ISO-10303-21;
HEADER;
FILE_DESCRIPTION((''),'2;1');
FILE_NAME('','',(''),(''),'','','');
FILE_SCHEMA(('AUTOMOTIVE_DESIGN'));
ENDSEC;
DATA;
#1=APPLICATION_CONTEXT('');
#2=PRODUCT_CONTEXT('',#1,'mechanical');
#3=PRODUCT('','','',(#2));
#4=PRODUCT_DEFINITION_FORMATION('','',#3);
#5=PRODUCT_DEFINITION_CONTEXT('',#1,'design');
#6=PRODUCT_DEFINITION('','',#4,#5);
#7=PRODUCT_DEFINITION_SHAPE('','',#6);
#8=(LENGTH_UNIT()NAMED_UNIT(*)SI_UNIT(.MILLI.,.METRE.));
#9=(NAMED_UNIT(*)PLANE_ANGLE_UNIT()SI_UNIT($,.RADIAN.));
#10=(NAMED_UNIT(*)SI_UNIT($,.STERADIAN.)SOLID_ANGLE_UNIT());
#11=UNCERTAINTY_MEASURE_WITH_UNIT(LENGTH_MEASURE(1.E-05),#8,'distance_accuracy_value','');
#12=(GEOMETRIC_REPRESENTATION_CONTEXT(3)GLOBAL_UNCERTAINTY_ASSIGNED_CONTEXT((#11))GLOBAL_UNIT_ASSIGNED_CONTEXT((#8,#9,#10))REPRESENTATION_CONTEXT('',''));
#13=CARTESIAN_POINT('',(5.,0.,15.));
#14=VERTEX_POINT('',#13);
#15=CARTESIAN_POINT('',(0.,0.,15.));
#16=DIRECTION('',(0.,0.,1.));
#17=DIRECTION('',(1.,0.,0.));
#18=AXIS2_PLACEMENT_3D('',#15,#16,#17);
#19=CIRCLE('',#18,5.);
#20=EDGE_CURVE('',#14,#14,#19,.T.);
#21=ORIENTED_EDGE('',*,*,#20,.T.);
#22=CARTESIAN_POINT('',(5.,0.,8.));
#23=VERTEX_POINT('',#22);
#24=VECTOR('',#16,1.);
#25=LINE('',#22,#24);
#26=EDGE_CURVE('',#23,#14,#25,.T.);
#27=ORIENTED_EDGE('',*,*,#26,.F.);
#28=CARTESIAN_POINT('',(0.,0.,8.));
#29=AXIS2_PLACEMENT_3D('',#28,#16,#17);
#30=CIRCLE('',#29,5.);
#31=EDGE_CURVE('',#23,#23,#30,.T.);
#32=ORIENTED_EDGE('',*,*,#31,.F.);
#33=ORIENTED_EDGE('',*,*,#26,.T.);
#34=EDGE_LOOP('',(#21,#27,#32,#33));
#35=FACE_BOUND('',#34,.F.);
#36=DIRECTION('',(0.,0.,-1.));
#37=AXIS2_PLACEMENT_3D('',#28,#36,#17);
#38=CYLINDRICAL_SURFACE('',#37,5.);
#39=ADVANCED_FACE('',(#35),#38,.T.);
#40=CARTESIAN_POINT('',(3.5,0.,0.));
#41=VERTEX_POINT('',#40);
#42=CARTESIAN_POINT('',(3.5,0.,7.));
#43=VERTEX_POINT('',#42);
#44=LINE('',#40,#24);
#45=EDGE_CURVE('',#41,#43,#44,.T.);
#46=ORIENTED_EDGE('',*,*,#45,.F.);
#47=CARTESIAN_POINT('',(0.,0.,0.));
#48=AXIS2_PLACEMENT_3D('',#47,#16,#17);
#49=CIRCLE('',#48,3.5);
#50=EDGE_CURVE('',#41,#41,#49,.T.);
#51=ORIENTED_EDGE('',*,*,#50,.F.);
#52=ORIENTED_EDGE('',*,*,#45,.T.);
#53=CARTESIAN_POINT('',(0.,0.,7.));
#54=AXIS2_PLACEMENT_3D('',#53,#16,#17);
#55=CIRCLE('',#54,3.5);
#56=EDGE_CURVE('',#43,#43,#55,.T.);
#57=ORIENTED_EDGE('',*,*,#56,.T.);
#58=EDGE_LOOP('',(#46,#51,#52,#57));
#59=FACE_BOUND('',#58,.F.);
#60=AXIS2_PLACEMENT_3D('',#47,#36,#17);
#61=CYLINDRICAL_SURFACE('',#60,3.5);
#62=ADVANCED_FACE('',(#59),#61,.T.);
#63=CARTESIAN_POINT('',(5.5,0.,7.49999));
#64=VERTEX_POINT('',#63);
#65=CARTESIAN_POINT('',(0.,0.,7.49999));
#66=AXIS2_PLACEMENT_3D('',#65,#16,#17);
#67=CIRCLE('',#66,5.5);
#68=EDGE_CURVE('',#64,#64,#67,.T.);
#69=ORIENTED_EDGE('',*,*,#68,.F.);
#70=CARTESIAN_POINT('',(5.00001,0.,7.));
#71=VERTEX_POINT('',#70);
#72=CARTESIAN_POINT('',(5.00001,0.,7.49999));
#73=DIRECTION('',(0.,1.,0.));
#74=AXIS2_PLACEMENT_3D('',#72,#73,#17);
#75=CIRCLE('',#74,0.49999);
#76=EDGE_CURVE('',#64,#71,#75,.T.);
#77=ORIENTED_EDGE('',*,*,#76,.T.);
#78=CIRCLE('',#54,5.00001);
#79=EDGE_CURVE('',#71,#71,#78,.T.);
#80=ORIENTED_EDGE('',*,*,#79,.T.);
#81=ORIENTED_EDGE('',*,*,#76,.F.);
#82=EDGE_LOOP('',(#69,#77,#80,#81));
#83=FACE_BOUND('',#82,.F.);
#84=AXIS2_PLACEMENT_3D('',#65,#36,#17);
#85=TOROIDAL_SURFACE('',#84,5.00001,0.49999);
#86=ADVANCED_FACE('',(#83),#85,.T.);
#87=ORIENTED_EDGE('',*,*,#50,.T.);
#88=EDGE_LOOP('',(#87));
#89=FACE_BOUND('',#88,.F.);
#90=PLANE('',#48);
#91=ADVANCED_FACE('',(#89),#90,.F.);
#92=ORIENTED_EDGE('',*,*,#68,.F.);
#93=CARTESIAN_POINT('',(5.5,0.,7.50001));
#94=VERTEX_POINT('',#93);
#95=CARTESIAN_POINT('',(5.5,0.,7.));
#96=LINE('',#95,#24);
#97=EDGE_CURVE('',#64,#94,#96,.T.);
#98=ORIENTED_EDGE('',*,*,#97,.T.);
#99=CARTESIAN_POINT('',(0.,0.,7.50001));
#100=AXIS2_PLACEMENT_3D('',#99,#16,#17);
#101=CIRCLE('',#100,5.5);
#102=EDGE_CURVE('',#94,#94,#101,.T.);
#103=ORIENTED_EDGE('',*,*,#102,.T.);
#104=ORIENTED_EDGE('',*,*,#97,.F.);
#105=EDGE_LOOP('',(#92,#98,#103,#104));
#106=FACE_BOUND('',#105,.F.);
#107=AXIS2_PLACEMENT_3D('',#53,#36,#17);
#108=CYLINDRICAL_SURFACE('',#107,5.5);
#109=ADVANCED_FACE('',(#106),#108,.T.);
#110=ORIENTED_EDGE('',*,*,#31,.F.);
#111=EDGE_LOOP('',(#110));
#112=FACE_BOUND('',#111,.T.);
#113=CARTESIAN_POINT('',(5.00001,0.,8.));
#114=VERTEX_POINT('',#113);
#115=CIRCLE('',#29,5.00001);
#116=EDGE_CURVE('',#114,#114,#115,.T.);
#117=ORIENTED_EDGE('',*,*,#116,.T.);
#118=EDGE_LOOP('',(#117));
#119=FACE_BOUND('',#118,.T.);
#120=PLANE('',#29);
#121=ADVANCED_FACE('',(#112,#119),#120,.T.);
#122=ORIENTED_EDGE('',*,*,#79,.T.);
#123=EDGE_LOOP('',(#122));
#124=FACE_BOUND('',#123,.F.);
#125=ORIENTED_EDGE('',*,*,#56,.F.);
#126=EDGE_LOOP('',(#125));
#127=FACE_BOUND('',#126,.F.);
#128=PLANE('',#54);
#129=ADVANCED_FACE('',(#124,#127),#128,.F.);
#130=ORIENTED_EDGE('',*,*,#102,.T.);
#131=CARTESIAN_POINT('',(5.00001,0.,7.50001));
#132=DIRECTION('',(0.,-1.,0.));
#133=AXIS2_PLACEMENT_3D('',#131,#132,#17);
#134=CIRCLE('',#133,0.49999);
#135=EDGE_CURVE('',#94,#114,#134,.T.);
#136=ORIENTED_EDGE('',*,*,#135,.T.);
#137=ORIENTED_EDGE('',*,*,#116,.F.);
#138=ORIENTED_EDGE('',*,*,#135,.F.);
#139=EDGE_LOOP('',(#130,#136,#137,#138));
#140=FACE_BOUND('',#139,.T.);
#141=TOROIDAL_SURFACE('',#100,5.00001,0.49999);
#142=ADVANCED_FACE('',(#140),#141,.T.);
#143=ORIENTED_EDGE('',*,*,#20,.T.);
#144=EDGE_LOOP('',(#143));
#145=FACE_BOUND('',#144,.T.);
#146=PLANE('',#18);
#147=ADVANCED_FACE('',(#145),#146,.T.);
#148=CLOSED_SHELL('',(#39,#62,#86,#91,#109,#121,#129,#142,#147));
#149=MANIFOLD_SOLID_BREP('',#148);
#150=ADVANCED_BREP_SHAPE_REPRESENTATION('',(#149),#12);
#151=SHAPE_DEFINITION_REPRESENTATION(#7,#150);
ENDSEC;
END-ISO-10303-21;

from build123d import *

# Parameters (mm, degrees)
F0_R     = 3.5
F1_DEPTH = 7
F2_R     = 5.5
F3_DEPTH = 1
F5_R     = 0.49999
F4_R     = 5
F6_DEPTH = 7


# Not quite as in the source:
# - a fillet or chamfer is up to 0.001 mm smaller than in the source, because OpenCascade refuses the exact size


with BuildPart() as f1:
    # F0 (on Top) → F1 (new body)
    with BuildSketch(Plane.XY):
        Circle(F0_R)
    extrude(amount=F1_DEPTH)

    # F2 (on face) → F3 (join)
    with BuildSketch(Plane.XY.offset(7)):
        Circle(F2_R)
    extrude(amount=F3_DEPTH)

    # F5 (radius 0.5 in the source; OpenCascade refuses exactly that, so slightly less here)
    f5_edges = [f1.edges().sort_by_distance(p)[0] for p in [
        (-5.5, 0, 8),
        (-5.5, 0, 7),
    ]]
    fillet(f5_edges, radius=F5_R)

    # F4 (on face) → F6 (join)
    with BuildSketch(Plane.XY.offset(8)):
        Circle(F4_R)
    extrude(amount=F6_DEPTH)


solid = f1.part
